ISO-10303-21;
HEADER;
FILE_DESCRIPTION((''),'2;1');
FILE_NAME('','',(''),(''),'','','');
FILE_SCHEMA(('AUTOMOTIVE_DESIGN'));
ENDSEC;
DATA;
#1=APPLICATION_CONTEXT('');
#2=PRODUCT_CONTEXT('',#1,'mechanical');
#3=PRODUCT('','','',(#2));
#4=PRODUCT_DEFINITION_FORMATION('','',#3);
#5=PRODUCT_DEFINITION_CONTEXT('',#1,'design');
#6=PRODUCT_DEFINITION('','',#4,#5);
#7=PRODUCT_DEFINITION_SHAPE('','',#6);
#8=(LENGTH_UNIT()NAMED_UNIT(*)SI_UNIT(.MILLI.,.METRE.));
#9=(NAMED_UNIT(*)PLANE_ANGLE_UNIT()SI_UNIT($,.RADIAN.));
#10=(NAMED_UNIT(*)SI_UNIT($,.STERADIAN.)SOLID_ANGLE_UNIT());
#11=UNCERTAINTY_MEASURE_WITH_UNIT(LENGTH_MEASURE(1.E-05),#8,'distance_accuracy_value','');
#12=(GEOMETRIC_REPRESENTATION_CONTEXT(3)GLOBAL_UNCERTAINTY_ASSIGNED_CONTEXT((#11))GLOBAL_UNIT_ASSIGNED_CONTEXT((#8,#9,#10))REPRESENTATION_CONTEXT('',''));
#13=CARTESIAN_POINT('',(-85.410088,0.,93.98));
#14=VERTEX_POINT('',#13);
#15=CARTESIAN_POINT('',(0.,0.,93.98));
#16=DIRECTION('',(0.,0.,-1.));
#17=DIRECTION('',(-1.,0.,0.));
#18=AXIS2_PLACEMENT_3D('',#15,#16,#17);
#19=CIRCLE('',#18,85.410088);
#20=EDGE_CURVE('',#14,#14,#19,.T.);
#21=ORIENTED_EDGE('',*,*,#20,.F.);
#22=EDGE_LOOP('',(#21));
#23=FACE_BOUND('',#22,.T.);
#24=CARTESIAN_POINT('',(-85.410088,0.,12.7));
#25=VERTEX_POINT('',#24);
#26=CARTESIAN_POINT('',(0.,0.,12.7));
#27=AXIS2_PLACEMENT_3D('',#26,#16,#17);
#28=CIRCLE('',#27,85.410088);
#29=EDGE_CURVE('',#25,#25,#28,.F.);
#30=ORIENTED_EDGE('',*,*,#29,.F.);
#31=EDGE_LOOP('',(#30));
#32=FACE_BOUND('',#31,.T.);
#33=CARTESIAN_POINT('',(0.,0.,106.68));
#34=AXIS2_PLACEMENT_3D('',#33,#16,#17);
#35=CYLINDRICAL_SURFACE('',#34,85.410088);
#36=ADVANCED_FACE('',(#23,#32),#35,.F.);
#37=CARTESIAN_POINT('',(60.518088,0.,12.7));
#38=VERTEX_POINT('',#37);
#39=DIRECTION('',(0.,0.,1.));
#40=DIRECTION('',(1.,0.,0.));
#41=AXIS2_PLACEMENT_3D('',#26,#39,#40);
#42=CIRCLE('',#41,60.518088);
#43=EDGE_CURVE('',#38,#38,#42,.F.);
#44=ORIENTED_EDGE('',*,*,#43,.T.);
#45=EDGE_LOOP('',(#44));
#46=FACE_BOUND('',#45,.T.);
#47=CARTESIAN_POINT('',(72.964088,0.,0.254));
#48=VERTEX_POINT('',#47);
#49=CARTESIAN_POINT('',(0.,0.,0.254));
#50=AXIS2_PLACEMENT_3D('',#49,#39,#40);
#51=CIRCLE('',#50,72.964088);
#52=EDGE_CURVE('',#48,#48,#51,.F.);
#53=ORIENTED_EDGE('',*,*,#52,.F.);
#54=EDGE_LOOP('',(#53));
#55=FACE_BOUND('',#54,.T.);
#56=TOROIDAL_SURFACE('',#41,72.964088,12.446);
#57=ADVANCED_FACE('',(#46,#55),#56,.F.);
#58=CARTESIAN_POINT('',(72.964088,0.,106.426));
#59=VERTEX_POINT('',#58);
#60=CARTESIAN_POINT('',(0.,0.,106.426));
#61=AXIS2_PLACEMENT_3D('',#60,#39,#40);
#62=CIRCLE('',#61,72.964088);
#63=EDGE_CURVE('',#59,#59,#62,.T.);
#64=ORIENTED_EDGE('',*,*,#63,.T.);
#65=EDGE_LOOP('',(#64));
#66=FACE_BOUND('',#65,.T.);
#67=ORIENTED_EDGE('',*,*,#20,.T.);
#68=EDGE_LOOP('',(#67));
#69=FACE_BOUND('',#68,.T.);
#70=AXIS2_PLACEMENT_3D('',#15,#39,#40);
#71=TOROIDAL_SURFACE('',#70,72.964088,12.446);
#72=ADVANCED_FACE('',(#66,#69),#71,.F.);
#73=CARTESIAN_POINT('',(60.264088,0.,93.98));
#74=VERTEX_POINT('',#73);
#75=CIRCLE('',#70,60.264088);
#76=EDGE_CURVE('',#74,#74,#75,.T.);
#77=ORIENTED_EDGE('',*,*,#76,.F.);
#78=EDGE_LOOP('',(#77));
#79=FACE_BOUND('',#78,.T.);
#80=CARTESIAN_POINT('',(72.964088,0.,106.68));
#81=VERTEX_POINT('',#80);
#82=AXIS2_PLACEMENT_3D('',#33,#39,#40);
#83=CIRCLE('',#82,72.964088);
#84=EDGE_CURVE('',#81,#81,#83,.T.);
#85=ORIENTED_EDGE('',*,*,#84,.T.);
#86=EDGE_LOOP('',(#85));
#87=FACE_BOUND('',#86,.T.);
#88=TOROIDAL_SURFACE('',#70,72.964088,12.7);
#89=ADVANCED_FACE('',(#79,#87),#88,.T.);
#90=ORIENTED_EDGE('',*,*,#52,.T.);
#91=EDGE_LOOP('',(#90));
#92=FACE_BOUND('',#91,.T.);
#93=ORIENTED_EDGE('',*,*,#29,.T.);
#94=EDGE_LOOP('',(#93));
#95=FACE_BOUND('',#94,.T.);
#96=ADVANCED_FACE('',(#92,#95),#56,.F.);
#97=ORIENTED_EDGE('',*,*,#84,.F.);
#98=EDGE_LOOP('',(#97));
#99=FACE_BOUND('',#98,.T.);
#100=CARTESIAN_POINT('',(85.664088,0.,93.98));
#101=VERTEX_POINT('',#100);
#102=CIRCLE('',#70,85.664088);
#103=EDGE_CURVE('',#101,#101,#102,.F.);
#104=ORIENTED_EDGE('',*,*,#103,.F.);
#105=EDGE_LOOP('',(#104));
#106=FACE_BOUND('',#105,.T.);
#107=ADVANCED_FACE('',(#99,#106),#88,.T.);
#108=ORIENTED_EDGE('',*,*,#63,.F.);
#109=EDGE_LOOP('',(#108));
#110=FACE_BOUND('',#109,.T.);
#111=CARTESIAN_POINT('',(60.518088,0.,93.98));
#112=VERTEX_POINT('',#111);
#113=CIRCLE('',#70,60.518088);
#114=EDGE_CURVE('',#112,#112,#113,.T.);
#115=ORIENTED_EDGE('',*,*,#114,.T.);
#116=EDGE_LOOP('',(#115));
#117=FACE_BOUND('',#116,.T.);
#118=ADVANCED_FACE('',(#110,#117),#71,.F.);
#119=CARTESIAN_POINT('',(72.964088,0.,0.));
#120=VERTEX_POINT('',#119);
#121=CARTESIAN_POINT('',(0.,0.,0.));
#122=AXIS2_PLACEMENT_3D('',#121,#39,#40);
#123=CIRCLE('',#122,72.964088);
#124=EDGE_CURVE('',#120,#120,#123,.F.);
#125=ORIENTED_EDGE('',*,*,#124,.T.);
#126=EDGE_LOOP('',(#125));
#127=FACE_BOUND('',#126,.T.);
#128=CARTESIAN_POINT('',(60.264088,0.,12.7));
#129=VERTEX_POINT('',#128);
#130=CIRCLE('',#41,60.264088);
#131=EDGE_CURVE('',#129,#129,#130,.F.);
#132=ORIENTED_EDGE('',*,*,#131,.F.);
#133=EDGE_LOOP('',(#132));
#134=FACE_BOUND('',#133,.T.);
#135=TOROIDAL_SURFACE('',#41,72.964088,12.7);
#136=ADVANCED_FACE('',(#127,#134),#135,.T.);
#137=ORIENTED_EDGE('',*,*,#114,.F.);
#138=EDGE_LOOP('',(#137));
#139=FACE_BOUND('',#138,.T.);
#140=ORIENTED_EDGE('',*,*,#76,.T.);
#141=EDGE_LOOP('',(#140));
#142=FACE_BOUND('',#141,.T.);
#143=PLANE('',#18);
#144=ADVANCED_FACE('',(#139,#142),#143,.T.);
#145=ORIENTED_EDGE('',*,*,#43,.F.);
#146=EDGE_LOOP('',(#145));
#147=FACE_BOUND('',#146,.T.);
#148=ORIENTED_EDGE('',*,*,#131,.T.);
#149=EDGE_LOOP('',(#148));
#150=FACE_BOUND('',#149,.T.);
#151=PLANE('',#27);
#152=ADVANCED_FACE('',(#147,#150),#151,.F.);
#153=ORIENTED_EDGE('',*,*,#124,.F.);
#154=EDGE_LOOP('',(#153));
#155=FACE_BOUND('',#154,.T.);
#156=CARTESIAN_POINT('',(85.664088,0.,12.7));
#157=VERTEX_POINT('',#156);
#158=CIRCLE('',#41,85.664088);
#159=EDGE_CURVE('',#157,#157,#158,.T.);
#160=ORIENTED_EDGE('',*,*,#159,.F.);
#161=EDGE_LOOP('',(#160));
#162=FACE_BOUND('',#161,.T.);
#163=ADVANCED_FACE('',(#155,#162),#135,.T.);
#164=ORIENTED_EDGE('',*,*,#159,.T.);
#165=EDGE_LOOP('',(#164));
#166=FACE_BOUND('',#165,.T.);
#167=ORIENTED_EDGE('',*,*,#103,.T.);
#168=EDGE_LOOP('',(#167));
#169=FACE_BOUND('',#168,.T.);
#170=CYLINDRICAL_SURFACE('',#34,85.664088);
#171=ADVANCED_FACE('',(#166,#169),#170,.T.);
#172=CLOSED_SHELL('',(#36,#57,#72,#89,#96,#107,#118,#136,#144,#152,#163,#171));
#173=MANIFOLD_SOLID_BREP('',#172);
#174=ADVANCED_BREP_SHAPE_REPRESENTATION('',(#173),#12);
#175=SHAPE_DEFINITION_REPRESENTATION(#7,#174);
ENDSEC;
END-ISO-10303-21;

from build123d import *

# Parameters (mm, degrees)
SKETCH1_R           = 85.664088456
SKETCH1_R_2         = 60.264088456
EXTRUDE_THIN3_DEPTH = 106.68
FILLET7_R           = 12.7
FILLET8_R           = 12.7


# Read off the part's stored shape, not the designer's step: Shell1
with BuildPart() as part:
    # Sketch1 → Extrude-Thin3 (new body)
    with BuildSketch(Plane.XY):
        Circle(SKETCH1_R)
        Circle(SKETCH1_R_2, mode=Mode.SUBTRACT)
    extrude(amount=EXTRUDE_THIN3_DEPTH)

    # Fillet7
    fillet7_edges = [part.edges().sort_by_distance(p)[0] for p in [
        (-85.664088456, 0, 0),
        (-85.664088456, 0, 106.68),
    ]]
    fillet(fillet7_edges, radius=FILLET7_R)

    # Fillet8
    fillet8_edges = [part.edges().sort_by_distance(p)[0] for p in [
        (-60.264088456, 0, 0),
        (-60.264088456, 0, 106.68),
    ]]
    fillet(fillet8_edges, radius=FILLET8_R - 0.0001)  # a hair under: the kernel refuses the full size

    # Shell1 outline → Shell1 (revolve, cut)
    with BuildSketch(Plane.XZ):
        with BuildLine():
            Line((60.264088456, 93.98), (60.264088456, 12.7))
            Line((60.264088456, 12.7), (60.518088456, 12.7))
            ThreePointArc((60.518088456, 12.7), (64.163437457, 3.899349001), (72.964088456, 0.254))
            ThreePointArc((72.964088456, 0.254), (81.764739454, 3.899349001), (85.410088456, 12.7))
            Line((85.410088456, 12.7), (85.410088456, 93.98))
            ThreePointArc((85.410088456, 93.98), (81.764739454, 102.780650998), (72.964088456, 106.426))
            ThreePointArc((72.964088456, 106.426), (64.163437457, 102.780650999), (60.518088456, 93.98))
            Line((60.518088456, 93.98), (60.264088456, 93.98))
        make_face()
    revolve(axis=Axis((0, 0, 0), (0, 0, 1)), mode=Mode.SUBTRACT)


solid = part.part
